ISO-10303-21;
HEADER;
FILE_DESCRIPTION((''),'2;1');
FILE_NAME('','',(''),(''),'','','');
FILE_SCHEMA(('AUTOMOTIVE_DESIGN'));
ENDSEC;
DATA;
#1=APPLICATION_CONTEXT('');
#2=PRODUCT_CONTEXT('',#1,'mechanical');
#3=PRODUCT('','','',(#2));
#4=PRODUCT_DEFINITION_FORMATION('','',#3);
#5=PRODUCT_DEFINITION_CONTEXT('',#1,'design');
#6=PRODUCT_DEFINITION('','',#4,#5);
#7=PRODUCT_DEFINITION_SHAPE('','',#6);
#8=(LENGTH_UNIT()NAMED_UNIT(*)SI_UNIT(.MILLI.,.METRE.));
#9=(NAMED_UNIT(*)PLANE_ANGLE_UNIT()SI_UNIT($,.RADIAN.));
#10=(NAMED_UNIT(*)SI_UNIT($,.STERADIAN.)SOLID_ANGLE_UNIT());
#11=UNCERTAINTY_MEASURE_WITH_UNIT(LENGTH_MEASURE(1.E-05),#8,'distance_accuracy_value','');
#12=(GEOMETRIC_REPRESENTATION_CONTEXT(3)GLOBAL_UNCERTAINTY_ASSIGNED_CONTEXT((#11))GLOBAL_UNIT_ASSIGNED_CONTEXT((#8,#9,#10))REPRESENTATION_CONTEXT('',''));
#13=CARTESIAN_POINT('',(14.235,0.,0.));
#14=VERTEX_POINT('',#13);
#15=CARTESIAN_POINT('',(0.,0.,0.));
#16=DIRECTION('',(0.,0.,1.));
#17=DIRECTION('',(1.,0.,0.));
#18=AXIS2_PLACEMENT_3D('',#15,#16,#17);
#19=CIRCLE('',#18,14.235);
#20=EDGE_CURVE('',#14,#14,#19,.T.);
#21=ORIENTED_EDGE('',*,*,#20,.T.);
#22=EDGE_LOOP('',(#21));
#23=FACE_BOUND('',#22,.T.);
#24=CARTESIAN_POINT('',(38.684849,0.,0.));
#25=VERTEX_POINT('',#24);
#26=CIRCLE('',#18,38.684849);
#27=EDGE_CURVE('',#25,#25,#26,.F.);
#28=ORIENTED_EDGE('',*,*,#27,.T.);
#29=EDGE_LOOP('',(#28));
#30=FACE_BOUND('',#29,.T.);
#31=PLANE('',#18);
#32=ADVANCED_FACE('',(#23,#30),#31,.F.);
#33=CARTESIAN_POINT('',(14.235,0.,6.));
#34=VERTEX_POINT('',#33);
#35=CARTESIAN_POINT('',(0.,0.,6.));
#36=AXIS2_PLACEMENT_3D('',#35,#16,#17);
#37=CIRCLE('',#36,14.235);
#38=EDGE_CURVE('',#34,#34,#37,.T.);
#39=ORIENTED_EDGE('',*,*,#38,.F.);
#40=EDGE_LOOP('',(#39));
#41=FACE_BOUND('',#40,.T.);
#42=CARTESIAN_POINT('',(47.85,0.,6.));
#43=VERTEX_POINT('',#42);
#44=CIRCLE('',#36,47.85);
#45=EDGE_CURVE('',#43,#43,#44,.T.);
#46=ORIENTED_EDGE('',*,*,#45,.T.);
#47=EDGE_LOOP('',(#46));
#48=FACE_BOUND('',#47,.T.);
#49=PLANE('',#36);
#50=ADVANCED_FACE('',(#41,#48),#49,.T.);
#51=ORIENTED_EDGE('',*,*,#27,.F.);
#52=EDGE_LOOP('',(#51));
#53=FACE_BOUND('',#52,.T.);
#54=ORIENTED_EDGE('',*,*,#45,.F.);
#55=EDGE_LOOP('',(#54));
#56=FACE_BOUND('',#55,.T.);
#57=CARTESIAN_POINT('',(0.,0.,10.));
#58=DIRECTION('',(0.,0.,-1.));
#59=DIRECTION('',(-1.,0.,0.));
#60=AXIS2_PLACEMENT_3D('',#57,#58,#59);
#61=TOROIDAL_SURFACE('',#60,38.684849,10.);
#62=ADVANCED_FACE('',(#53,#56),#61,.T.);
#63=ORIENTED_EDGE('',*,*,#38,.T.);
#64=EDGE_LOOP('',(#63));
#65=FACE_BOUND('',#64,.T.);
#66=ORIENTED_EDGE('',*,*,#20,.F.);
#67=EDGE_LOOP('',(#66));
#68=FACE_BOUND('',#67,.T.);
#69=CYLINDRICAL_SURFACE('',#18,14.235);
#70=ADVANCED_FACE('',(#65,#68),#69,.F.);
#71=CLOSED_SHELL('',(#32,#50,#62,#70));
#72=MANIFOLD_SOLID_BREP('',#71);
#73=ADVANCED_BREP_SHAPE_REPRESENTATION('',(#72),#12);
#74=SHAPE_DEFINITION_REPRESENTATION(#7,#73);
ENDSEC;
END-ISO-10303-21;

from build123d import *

# Parameters (mm, degrees)
SKETCH1_R           = 47.85
BOSS_EXTRUDE1_DEPTH = 6
SKETCH2_R           = 14.235
CUT_EXTRUDE1_DEPTH  = 6
FILLET2_R           = 10


with BuildPart() as part:
    # Sketch1 → Boss-Extrude1 (new body)
    with BuildSketch(Plane.XY):
        Circle(SKETCH1_R)
    extrude(amount=BOSS_EXTRUDE1_DEPTH)

    # Sketch2 → Cut-Extrude1 (cut)
    with BuildSketch(Plane.XY.offset(6)):
        Circle(SKETCH2_R)
    extrude(amount=-CUT_EXTRUDE1_DEPTH, mode=Mode.SUBTRACT)

    # Fillet2
    # the kernel refuses this fillet: 10 mm, written as the material it takes off along each edge
    with BuildSketch(Plane(origin=(0, 0, 0), x_dir=(1, 0, 0), z_dir=(0, -1, 0))) as fillet2_piece_1:
        with BuildLine():
            CenterArc((38.68484861, 10), FILLET2_R, 270, 66.421821522)
            Line((38.68484861, 0), (38.68484861, -0.2))
            Line((38.68484861, -0.2), (47.85, -0.2))
            Line((47.85, -0.2), (48.05, 0))
            ThreePointArc((48.05, 0), (48.05, 3), (48.033303028, 5.92))
            Line((48.033303028, 5.92), (47.85, 6))
        make_face()
    revolve(axis=Axis((0, 0, 0), (0, 0, 1)), mode=Mode.SUBTRACT)


solid = part.part
